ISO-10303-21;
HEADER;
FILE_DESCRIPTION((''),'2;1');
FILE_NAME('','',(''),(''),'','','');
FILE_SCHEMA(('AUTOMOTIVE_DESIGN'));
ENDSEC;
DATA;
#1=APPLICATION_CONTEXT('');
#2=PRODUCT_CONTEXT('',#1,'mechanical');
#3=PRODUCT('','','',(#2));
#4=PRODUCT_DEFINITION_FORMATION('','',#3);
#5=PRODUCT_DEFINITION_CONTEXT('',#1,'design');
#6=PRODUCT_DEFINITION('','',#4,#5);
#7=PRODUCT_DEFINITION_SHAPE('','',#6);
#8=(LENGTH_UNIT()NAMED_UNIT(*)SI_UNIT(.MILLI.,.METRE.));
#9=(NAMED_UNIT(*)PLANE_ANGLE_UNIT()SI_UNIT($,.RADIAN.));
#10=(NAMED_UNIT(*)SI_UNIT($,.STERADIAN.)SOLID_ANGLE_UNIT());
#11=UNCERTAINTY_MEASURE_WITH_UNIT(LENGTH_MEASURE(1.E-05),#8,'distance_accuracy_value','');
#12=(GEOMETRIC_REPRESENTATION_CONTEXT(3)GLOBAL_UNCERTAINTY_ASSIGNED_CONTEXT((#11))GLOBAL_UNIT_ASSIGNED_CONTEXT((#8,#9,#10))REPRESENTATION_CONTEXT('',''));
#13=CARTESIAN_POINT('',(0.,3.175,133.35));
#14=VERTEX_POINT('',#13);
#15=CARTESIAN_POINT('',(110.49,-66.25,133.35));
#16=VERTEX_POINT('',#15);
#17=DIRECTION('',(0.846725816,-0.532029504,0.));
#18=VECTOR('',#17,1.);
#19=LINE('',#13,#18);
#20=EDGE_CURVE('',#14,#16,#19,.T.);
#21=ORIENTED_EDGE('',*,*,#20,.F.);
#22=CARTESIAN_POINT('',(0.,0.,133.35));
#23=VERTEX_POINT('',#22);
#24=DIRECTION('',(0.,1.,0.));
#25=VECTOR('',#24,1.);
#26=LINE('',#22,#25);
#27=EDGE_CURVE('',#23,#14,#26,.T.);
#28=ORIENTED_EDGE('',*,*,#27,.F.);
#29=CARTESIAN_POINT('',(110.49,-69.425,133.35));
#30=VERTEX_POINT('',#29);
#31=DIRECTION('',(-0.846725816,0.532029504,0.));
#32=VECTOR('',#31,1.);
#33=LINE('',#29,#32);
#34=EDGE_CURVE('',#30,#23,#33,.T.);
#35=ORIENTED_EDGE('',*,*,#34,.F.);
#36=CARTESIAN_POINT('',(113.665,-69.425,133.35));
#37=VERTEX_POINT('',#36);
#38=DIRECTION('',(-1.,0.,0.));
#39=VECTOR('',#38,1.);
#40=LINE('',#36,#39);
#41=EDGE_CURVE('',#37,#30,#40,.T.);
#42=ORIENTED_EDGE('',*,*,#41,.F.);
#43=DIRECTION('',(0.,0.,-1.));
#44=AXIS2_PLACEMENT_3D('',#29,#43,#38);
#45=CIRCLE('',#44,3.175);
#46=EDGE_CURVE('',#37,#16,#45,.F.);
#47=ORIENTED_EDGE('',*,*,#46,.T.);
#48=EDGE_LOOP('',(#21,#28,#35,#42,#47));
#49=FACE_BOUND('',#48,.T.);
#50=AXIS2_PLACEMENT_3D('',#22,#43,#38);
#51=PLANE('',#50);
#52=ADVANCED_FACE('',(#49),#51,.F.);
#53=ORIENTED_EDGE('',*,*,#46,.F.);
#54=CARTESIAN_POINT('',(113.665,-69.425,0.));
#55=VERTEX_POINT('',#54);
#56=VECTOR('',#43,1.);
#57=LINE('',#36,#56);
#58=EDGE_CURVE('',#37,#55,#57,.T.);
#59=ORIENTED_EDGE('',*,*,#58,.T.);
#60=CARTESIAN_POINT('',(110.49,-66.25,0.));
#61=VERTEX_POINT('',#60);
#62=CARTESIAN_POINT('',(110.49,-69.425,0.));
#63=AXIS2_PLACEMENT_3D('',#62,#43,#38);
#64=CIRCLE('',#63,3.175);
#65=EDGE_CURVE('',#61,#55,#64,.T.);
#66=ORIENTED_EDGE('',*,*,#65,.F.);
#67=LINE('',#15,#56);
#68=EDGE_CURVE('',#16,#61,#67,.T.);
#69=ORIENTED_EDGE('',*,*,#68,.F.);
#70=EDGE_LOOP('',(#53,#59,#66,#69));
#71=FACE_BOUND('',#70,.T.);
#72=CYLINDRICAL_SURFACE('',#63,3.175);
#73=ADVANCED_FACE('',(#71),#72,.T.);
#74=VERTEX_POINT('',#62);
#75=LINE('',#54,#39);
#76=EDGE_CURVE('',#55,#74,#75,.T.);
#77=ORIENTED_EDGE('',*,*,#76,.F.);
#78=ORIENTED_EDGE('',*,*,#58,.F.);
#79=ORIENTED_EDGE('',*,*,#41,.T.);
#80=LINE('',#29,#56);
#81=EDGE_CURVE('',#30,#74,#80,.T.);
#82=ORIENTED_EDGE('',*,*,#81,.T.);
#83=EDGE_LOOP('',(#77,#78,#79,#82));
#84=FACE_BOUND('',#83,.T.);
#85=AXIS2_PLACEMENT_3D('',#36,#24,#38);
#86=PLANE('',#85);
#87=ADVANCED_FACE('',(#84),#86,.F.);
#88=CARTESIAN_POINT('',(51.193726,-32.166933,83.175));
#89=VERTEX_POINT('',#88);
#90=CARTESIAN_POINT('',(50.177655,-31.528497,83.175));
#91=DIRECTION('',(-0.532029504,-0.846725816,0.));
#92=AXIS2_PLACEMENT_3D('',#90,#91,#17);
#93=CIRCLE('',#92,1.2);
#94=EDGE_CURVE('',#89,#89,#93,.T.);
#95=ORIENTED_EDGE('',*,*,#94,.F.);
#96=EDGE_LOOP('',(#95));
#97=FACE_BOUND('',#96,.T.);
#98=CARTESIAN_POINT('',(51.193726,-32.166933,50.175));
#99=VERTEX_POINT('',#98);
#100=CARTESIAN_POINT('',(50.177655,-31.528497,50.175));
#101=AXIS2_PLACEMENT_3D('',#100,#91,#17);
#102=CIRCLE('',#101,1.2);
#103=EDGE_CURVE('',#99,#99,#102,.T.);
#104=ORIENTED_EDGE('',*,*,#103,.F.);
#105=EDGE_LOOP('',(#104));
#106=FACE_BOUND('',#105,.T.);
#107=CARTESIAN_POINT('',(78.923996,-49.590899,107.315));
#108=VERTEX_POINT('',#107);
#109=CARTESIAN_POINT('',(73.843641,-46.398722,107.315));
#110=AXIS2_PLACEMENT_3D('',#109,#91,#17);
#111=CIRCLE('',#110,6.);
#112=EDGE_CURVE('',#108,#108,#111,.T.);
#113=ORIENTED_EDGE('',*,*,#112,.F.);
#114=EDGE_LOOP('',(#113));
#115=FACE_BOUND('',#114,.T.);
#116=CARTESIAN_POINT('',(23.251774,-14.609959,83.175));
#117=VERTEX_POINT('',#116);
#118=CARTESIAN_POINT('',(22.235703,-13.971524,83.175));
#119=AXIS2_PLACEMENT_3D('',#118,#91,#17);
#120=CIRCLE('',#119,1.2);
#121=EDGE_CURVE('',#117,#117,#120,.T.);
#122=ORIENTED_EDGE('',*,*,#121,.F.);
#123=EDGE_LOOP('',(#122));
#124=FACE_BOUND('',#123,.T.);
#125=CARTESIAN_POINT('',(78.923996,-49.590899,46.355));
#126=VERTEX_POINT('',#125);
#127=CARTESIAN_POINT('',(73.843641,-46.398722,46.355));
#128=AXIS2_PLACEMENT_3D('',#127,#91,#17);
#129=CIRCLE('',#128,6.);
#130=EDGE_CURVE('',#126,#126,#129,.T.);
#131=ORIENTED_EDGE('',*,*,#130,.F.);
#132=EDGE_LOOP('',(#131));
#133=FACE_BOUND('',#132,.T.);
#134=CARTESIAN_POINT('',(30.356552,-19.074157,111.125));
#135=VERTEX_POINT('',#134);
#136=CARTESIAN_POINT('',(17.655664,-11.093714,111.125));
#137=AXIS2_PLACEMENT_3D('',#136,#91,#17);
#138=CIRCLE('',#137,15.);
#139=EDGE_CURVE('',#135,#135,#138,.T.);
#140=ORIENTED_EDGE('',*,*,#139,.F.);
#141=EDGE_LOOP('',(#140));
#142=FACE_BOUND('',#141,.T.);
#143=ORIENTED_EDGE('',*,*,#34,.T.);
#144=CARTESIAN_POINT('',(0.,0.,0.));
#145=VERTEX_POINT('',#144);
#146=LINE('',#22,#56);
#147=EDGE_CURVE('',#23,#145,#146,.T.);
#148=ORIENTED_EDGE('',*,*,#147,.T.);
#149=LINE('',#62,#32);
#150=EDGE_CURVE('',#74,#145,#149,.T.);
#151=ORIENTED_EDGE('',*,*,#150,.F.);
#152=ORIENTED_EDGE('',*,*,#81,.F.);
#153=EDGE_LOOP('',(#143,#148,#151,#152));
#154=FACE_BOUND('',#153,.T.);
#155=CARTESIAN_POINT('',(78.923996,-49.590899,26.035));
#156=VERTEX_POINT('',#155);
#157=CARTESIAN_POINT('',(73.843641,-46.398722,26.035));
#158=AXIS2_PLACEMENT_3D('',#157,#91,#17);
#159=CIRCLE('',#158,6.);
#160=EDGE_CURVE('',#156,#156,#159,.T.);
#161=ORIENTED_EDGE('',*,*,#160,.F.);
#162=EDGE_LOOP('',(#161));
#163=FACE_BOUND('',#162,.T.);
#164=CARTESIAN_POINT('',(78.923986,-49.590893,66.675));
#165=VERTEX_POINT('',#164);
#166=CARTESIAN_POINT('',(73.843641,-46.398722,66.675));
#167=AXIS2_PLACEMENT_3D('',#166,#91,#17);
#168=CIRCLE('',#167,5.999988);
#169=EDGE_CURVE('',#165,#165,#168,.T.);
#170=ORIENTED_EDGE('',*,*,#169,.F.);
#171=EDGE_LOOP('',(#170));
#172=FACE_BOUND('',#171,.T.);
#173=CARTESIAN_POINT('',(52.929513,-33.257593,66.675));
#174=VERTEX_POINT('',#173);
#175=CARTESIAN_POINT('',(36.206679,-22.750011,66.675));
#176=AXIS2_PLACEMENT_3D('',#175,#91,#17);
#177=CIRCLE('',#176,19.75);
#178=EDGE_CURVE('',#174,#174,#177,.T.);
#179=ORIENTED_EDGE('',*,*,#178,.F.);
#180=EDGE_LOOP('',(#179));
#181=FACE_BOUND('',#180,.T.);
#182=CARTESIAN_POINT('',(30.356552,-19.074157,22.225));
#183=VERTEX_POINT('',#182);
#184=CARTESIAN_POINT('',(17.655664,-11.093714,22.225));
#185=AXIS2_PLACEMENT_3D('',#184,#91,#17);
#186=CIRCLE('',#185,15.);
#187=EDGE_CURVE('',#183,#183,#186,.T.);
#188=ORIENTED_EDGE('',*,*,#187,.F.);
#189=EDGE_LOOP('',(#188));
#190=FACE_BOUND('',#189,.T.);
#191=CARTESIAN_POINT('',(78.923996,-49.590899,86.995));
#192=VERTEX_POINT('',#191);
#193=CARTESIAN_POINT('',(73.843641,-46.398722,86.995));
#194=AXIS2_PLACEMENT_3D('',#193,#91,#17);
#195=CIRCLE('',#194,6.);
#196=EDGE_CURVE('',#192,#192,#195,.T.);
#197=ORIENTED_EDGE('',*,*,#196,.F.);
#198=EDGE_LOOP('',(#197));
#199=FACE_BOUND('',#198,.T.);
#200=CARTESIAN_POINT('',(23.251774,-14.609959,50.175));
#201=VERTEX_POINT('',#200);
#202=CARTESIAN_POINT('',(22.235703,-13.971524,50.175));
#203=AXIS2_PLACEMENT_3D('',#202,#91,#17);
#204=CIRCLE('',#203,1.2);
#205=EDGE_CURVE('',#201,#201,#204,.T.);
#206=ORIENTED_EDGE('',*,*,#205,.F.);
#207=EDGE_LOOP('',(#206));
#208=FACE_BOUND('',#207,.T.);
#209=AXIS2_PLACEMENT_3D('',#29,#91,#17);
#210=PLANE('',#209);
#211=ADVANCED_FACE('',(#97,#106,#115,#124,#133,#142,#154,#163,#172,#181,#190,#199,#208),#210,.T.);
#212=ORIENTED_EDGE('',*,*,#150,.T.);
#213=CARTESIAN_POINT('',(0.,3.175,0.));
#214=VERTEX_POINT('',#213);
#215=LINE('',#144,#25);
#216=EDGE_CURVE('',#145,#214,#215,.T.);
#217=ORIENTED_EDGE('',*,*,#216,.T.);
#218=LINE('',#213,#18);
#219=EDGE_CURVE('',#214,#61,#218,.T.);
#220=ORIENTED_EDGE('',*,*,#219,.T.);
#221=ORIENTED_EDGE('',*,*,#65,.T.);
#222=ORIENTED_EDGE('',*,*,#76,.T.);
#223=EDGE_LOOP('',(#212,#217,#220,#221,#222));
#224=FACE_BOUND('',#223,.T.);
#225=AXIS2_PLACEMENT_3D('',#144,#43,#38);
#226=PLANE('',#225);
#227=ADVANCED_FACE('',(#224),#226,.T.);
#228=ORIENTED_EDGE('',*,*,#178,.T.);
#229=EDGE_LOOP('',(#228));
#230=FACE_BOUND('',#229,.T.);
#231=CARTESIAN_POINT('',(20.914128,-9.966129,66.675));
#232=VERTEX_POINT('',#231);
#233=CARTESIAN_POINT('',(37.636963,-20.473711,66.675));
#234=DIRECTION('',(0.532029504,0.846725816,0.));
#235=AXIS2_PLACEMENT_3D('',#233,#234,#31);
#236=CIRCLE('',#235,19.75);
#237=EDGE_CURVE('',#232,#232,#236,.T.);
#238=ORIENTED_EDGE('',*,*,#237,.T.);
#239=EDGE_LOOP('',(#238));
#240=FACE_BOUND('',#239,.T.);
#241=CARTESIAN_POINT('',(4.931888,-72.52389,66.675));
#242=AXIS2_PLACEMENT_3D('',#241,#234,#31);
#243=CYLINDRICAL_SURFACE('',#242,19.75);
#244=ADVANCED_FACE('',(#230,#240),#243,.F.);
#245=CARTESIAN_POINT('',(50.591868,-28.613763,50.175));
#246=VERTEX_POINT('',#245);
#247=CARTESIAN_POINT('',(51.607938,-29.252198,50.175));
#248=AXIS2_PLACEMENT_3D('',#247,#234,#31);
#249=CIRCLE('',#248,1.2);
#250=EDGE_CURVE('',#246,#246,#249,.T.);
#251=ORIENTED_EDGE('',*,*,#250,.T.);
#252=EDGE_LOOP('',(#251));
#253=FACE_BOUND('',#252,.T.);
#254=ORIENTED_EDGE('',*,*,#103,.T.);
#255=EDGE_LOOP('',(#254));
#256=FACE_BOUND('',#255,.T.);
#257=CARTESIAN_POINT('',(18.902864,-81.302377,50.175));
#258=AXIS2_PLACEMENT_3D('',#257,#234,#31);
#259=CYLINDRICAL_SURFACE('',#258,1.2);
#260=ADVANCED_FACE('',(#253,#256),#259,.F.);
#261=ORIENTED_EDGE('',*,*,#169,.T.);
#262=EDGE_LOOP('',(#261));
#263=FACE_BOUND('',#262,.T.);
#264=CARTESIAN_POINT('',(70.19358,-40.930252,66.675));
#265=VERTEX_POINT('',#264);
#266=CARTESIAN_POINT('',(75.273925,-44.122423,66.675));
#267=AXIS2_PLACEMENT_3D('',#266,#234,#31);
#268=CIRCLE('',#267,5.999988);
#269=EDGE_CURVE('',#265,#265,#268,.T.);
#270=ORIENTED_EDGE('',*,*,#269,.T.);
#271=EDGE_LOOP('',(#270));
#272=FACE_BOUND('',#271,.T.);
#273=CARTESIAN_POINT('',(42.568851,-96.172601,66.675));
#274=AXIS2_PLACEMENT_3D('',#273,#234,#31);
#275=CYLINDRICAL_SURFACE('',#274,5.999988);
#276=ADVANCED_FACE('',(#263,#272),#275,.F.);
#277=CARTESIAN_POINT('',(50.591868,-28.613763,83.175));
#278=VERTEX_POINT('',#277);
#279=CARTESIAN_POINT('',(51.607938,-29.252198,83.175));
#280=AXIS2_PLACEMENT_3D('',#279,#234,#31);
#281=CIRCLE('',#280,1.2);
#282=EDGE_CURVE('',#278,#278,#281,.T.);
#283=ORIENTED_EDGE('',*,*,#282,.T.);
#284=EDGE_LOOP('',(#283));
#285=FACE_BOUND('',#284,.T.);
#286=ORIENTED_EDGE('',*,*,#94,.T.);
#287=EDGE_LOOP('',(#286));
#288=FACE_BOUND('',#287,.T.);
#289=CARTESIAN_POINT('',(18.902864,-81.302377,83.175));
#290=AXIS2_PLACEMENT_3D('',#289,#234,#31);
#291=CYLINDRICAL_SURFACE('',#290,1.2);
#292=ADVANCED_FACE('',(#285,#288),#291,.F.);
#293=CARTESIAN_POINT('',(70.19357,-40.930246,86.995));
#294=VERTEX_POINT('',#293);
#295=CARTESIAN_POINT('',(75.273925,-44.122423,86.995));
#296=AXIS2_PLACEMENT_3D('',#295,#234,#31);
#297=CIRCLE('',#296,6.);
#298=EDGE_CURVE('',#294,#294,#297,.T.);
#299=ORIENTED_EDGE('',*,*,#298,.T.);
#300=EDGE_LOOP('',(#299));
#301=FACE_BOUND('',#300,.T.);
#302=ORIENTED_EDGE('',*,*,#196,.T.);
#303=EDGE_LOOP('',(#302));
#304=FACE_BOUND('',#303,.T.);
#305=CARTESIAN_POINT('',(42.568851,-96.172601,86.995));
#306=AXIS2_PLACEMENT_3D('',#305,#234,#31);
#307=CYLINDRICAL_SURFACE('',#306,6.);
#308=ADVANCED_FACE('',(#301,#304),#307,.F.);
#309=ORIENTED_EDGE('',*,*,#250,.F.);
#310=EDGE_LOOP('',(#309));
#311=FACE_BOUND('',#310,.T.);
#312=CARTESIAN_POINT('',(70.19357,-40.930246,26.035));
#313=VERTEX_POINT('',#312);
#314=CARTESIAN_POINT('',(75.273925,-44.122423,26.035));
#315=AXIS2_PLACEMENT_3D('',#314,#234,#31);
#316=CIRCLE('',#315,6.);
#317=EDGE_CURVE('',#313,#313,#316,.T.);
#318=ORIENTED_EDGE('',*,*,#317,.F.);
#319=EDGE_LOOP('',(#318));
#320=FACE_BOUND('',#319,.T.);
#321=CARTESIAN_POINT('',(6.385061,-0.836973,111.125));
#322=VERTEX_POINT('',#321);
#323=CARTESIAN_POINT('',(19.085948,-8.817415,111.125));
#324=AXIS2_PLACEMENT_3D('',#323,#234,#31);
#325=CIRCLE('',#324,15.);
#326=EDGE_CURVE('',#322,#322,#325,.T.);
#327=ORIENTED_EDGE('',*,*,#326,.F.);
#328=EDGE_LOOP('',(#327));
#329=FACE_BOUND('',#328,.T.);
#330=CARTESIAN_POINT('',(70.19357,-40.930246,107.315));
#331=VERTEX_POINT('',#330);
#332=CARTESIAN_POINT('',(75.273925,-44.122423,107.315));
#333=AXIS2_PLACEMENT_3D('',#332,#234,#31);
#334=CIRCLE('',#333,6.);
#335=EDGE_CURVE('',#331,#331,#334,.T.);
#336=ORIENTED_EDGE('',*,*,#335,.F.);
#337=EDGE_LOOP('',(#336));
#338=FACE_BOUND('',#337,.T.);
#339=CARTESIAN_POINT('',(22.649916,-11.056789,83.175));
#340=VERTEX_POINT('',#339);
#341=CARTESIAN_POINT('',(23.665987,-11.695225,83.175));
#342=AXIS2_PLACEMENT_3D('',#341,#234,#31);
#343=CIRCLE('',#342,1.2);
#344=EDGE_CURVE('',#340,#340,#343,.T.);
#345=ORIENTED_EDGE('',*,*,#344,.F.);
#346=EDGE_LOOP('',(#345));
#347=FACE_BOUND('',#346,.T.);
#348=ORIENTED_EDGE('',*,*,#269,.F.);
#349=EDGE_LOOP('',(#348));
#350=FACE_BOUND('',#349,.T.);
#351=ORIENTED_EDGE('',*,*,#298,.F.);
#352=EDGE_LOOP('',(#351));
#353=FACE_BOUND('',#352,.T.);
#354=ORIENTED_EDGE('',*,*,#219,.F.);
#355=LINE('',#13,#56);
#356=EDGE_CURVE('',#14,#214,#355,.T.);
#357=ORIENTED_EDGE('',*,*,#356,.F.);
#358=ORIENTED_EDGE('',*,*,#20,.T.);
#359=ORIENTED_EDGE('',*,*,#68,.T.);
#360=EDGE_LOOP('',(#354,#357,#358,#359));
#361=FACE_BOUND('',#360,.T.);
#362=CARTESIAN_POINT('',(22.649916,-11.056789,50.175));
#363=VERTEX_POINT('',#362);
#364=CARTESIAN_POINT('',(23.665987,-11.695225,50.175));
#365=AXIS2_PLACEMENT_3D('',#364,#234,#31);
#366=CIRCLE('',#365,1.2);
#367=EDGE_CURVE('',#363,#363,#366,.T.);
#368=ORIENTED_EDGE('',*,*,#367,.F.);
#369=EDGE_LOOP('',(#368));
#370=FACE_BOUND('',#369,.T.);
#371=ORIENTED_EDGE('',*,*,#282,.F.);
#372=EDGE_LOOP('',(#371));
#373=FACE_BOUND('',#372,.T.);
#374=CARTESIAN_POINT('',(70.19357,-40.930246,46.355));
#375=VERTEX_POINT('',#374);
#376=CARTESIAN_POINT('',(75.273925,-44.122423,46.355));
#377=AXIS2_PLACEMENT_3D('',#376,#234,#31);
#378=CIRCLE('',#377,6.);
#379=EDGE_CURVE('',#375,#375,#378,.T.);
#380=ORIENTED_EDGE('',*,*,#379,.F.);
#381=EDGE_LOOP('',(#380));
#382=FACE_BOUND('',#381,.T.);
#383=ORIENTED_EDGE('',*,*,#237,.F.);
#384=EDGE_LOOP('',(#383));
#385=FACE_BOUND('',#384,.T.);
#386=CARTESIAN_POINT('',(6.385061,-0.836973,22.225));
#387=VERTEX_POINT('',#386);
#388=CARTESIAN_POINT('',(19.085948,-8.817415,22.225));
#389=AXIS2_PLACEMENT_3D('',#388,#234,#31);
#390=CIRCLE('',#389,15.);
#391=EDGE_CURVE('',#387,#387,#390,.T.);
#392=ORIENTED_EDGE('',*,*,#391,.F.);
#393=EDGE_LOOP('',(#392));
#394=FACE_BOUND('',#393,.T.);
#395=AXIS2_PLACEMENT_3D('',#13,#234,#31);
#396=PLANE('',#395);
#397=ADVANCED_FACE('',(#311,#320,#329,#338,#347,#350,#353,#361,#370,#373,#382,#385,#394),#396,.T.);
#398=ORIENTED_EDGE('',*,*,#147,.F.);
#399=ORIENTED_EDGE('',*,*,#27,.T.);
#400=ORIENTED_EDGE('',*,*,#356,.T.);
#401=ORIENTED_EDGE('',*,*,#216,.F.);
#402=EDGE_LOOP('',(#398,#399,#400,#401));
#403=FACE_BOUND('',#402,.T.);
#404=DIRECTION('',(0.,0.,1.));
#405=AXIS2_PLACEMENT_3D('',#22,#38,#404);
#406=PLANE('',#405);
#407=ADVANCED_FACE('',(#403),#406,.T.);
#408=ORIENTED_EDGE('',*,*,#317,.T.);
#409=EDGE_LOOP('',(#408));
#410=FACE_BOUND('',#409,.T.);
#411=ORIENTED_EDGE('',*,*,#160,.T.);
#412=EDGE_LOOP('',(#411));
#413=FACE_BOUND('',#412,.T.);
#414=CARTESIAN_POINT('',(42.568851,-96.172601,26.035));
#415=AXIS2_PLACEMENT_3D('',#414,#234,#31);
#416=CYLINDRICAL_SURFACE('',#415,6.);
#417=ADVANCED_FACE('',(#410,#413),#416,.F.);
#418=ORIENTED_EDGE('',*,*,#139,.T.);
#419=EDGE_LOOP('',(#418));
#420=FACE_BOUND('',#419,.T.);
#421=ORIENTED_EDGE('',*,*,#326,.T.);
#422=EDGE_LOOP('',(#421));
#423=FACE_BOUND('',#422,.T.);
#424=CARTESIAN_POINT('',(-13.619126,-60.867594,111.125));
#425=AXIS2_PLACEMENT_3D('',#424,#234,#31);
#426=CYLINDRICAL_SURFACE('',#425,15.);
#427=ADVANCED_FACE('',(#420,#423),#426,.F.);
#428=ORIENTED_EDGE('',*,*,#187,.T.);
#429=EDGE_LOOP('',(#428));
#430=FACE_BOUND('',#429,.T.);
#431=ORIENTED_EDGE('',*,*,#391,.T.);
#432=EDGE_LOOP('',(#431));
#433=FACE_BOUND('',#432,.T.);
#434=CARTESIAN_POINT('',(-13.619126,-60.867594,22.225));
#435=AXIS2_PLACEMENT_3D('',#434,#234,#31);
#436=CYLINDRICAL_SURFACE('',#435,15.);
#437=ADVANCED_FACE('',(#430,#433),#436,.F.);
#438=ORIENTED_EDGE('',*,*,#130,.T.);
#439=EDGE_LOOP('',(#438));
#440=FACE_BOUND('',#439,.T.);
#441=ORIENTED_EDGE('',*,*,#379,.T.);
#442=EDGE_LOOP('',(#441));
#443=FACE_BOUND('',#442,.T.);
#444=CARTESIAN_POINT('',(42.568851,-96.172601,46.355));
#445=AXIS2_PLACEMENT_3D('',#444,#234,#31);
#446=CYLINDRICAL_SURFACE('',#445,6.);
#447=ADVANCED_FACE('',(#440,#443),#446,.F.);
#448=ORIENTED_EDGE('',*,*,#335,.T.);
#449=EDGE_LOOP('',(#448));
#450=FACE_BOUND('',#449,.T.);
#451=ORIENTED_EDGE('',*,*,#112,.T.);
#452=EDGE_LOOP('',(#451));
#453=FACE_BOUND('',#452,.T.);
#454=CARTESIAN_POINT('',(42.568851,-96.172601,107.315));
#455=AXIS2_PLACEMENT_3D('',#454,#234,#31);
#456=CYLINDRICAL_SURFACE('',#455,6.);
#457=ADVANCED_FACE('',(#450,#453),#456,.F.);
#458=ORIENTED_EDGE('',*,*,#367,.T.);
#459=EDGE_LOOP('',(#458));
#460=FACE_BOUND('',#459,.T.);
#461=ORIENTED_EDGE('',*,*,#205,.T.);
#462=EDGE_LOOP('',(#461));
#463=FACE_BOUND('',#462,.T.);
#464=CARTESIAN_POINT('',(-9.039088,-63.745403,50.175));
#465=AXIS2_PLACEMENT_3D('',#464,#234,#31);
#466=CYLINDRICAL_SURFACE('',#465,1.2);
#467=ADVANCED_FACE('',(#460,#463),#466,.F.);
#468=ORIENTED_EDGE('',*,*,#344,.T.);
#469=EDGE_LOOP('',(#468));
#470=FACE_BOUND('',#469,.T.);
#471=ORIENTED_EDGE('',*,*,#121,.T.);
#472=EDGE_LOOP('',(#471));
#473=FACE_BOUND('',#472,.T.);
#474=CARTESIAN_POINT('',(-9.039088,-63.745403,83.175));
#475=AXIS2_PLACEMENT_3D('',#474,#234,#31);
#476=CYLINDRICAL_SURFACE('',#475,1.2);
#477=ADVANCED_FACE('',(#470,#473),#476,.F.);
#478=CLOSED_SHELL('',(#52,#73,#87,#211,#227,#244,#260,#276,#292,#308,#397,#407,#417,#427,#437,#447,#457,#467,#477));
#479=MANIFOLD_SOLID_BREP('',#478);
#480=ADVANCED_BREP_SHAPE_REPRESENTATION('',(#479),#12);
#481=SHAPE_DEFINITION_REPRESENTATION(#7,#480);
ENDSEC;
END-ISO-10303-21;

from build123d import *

# Parameters (mm, degrees)
BOSS_EXTRUDE1_DEPTH = 133.35
SKETCH2_R           = 1.2
SKETCH2_R_2         = 19.75
CUT_EXTRUDE1_DEPTH  = 187.593999065
SKETCH3_W           = 133.35
SKETCH3_H           = 3.175
BOSS_EXTRUDE2_DEPTH = 3.175
FILLET1_R           = 3.175
SKETCH5_R           = 15
CUT_EXTRUDE2_DEPTH  = 189.467318942
SKETCH6_R           = 6
SKETCH6_R_2         = 5.999988
CUT_EXTRUDE3_DEPTH  = 189.467318942


with BuildPart() as part:
    # Sketch1 → Boss-Extrude1 (new body)
    with BuildSketch(Plane.XY):
        Polygon((110.49, -69.425000088), (0, 0), (0, 3.175), (110.49, -66.250000088), align=None)
    extrude(amount=BOSS_EXTRUDE1_DEPTH)

    # Sketch2 → Cut-Extrude1 (cut, through all)
    with BuildSketch(Plane(origin=(1.430283892, 2.276299128, 0), x_dir=(0.8467258159330607, -0.5320295035357462, 0), z_dir=(0.5320295035357462, 0.8467258159330607, 0))):
        with Locations(Location((26.260806326, -83.175, 0), (0, 0, 180))):
            Circle(SKETCH2_R)
        with Locations(Location((42.760806326, -66.675, 0), (0, 0, 180))):
            Circle(SKETCH2_R_2)
        with Locations(Location((59.260806326, -83.175, 0), (0, 0, 180))):
            Circle(SKETCH2_R)
        with Locations(Location((26.260806326, -50.175, 0), (0, 0, 180))):
            Circle(SKETCH2_R)
        with Locations(Location((59.260806326, -50.175, 0), (0, 0, 180))):
            Circle(SKETCH2_R)
    extrude(amount=-CUT_EXTRUDE1_DEPTH, mode=Mode.SUBTRACT)

    # Sketch3 → Boss-Extrude2 (add)
    with BuildSketch(Plane(origin=(110.49, 0, 0), x_dir=(0, 0, -1), z_dir=(1, 0, 0))):
        with Locations((-66.675, -67.837500088)):
            Rectangle(SKETCH3_W, SKETCH3_H)
    extrude(amount=BOSS_EXTRUDE2_DEPTH)

    # Fillet1
    fillet1_edges = [part.edges().sort_by_distance(p)[0] for p in [
        (113.665, -66.250000088, 66.675),
    ]]
    fillet(fillet1_edges, radius=FILLET1_R - 0.0001)  # a hair under: the kernel refuses the full size

    # Sketch5 → Cut-Extrude2 (cut, through all)
    with BuildSketch(Plane(origin=(1.430283892, 2.276299128, 0), x_dir=(0.8467258159330606, -0.5320295035357464, 0), z_dir=(0.5320295035357464, 0.8467258159330606, 0))):
        with Locations(Location((20.851690059, -111.125, 0), (0, 0, 180))):
            Circle(SKETCH5_R)
        with Locations(Location((20.851690059, -22.225, 0), (0, 0, 180))):
            Circle(SKETCH5_R)
    extrude(amount=-CUT_EXTRUDE2_DEPTH, mode=Mode.SUBTRACT)

    # Sketch6 → Cut-Extrude3 (cut, through all)
    with BuildSketch(Plane(origin=(1.430283892, 2.276299128, 0), x_dir=(0.8467258159330606, -0.5320295035357464, 0), z_dir=(0.5320295035357464, 0.8467258159330606, 0))):
        with Locations(Location((87.210806326, -46.355, 0), (0, 0, 180))):
            Circle(SKETCH6_R)
        with Locations(Location((87.210806326, -26.035, 0), (0, 0, 180))):
            Circle(SKETCH6_R)
        with Locations(Location((87.210806326, -86.995, 0), (0, 0, 180))):
            Circle(SKETCH6_R)
        with Locations(Location((87.210806326, -107.315, 0), (0, 0, 180))):
            Circle(SKETCH6_R)
        with Locations(Location((87.210806326, -66.675, 0), (0, 0, 180))):
            Circle(SKETCH6_R_2)
    extrude(amount=-CUT_EXTRUDE3_DEPTH, mode=Mode.SUBTRACT)


solid = part.part
